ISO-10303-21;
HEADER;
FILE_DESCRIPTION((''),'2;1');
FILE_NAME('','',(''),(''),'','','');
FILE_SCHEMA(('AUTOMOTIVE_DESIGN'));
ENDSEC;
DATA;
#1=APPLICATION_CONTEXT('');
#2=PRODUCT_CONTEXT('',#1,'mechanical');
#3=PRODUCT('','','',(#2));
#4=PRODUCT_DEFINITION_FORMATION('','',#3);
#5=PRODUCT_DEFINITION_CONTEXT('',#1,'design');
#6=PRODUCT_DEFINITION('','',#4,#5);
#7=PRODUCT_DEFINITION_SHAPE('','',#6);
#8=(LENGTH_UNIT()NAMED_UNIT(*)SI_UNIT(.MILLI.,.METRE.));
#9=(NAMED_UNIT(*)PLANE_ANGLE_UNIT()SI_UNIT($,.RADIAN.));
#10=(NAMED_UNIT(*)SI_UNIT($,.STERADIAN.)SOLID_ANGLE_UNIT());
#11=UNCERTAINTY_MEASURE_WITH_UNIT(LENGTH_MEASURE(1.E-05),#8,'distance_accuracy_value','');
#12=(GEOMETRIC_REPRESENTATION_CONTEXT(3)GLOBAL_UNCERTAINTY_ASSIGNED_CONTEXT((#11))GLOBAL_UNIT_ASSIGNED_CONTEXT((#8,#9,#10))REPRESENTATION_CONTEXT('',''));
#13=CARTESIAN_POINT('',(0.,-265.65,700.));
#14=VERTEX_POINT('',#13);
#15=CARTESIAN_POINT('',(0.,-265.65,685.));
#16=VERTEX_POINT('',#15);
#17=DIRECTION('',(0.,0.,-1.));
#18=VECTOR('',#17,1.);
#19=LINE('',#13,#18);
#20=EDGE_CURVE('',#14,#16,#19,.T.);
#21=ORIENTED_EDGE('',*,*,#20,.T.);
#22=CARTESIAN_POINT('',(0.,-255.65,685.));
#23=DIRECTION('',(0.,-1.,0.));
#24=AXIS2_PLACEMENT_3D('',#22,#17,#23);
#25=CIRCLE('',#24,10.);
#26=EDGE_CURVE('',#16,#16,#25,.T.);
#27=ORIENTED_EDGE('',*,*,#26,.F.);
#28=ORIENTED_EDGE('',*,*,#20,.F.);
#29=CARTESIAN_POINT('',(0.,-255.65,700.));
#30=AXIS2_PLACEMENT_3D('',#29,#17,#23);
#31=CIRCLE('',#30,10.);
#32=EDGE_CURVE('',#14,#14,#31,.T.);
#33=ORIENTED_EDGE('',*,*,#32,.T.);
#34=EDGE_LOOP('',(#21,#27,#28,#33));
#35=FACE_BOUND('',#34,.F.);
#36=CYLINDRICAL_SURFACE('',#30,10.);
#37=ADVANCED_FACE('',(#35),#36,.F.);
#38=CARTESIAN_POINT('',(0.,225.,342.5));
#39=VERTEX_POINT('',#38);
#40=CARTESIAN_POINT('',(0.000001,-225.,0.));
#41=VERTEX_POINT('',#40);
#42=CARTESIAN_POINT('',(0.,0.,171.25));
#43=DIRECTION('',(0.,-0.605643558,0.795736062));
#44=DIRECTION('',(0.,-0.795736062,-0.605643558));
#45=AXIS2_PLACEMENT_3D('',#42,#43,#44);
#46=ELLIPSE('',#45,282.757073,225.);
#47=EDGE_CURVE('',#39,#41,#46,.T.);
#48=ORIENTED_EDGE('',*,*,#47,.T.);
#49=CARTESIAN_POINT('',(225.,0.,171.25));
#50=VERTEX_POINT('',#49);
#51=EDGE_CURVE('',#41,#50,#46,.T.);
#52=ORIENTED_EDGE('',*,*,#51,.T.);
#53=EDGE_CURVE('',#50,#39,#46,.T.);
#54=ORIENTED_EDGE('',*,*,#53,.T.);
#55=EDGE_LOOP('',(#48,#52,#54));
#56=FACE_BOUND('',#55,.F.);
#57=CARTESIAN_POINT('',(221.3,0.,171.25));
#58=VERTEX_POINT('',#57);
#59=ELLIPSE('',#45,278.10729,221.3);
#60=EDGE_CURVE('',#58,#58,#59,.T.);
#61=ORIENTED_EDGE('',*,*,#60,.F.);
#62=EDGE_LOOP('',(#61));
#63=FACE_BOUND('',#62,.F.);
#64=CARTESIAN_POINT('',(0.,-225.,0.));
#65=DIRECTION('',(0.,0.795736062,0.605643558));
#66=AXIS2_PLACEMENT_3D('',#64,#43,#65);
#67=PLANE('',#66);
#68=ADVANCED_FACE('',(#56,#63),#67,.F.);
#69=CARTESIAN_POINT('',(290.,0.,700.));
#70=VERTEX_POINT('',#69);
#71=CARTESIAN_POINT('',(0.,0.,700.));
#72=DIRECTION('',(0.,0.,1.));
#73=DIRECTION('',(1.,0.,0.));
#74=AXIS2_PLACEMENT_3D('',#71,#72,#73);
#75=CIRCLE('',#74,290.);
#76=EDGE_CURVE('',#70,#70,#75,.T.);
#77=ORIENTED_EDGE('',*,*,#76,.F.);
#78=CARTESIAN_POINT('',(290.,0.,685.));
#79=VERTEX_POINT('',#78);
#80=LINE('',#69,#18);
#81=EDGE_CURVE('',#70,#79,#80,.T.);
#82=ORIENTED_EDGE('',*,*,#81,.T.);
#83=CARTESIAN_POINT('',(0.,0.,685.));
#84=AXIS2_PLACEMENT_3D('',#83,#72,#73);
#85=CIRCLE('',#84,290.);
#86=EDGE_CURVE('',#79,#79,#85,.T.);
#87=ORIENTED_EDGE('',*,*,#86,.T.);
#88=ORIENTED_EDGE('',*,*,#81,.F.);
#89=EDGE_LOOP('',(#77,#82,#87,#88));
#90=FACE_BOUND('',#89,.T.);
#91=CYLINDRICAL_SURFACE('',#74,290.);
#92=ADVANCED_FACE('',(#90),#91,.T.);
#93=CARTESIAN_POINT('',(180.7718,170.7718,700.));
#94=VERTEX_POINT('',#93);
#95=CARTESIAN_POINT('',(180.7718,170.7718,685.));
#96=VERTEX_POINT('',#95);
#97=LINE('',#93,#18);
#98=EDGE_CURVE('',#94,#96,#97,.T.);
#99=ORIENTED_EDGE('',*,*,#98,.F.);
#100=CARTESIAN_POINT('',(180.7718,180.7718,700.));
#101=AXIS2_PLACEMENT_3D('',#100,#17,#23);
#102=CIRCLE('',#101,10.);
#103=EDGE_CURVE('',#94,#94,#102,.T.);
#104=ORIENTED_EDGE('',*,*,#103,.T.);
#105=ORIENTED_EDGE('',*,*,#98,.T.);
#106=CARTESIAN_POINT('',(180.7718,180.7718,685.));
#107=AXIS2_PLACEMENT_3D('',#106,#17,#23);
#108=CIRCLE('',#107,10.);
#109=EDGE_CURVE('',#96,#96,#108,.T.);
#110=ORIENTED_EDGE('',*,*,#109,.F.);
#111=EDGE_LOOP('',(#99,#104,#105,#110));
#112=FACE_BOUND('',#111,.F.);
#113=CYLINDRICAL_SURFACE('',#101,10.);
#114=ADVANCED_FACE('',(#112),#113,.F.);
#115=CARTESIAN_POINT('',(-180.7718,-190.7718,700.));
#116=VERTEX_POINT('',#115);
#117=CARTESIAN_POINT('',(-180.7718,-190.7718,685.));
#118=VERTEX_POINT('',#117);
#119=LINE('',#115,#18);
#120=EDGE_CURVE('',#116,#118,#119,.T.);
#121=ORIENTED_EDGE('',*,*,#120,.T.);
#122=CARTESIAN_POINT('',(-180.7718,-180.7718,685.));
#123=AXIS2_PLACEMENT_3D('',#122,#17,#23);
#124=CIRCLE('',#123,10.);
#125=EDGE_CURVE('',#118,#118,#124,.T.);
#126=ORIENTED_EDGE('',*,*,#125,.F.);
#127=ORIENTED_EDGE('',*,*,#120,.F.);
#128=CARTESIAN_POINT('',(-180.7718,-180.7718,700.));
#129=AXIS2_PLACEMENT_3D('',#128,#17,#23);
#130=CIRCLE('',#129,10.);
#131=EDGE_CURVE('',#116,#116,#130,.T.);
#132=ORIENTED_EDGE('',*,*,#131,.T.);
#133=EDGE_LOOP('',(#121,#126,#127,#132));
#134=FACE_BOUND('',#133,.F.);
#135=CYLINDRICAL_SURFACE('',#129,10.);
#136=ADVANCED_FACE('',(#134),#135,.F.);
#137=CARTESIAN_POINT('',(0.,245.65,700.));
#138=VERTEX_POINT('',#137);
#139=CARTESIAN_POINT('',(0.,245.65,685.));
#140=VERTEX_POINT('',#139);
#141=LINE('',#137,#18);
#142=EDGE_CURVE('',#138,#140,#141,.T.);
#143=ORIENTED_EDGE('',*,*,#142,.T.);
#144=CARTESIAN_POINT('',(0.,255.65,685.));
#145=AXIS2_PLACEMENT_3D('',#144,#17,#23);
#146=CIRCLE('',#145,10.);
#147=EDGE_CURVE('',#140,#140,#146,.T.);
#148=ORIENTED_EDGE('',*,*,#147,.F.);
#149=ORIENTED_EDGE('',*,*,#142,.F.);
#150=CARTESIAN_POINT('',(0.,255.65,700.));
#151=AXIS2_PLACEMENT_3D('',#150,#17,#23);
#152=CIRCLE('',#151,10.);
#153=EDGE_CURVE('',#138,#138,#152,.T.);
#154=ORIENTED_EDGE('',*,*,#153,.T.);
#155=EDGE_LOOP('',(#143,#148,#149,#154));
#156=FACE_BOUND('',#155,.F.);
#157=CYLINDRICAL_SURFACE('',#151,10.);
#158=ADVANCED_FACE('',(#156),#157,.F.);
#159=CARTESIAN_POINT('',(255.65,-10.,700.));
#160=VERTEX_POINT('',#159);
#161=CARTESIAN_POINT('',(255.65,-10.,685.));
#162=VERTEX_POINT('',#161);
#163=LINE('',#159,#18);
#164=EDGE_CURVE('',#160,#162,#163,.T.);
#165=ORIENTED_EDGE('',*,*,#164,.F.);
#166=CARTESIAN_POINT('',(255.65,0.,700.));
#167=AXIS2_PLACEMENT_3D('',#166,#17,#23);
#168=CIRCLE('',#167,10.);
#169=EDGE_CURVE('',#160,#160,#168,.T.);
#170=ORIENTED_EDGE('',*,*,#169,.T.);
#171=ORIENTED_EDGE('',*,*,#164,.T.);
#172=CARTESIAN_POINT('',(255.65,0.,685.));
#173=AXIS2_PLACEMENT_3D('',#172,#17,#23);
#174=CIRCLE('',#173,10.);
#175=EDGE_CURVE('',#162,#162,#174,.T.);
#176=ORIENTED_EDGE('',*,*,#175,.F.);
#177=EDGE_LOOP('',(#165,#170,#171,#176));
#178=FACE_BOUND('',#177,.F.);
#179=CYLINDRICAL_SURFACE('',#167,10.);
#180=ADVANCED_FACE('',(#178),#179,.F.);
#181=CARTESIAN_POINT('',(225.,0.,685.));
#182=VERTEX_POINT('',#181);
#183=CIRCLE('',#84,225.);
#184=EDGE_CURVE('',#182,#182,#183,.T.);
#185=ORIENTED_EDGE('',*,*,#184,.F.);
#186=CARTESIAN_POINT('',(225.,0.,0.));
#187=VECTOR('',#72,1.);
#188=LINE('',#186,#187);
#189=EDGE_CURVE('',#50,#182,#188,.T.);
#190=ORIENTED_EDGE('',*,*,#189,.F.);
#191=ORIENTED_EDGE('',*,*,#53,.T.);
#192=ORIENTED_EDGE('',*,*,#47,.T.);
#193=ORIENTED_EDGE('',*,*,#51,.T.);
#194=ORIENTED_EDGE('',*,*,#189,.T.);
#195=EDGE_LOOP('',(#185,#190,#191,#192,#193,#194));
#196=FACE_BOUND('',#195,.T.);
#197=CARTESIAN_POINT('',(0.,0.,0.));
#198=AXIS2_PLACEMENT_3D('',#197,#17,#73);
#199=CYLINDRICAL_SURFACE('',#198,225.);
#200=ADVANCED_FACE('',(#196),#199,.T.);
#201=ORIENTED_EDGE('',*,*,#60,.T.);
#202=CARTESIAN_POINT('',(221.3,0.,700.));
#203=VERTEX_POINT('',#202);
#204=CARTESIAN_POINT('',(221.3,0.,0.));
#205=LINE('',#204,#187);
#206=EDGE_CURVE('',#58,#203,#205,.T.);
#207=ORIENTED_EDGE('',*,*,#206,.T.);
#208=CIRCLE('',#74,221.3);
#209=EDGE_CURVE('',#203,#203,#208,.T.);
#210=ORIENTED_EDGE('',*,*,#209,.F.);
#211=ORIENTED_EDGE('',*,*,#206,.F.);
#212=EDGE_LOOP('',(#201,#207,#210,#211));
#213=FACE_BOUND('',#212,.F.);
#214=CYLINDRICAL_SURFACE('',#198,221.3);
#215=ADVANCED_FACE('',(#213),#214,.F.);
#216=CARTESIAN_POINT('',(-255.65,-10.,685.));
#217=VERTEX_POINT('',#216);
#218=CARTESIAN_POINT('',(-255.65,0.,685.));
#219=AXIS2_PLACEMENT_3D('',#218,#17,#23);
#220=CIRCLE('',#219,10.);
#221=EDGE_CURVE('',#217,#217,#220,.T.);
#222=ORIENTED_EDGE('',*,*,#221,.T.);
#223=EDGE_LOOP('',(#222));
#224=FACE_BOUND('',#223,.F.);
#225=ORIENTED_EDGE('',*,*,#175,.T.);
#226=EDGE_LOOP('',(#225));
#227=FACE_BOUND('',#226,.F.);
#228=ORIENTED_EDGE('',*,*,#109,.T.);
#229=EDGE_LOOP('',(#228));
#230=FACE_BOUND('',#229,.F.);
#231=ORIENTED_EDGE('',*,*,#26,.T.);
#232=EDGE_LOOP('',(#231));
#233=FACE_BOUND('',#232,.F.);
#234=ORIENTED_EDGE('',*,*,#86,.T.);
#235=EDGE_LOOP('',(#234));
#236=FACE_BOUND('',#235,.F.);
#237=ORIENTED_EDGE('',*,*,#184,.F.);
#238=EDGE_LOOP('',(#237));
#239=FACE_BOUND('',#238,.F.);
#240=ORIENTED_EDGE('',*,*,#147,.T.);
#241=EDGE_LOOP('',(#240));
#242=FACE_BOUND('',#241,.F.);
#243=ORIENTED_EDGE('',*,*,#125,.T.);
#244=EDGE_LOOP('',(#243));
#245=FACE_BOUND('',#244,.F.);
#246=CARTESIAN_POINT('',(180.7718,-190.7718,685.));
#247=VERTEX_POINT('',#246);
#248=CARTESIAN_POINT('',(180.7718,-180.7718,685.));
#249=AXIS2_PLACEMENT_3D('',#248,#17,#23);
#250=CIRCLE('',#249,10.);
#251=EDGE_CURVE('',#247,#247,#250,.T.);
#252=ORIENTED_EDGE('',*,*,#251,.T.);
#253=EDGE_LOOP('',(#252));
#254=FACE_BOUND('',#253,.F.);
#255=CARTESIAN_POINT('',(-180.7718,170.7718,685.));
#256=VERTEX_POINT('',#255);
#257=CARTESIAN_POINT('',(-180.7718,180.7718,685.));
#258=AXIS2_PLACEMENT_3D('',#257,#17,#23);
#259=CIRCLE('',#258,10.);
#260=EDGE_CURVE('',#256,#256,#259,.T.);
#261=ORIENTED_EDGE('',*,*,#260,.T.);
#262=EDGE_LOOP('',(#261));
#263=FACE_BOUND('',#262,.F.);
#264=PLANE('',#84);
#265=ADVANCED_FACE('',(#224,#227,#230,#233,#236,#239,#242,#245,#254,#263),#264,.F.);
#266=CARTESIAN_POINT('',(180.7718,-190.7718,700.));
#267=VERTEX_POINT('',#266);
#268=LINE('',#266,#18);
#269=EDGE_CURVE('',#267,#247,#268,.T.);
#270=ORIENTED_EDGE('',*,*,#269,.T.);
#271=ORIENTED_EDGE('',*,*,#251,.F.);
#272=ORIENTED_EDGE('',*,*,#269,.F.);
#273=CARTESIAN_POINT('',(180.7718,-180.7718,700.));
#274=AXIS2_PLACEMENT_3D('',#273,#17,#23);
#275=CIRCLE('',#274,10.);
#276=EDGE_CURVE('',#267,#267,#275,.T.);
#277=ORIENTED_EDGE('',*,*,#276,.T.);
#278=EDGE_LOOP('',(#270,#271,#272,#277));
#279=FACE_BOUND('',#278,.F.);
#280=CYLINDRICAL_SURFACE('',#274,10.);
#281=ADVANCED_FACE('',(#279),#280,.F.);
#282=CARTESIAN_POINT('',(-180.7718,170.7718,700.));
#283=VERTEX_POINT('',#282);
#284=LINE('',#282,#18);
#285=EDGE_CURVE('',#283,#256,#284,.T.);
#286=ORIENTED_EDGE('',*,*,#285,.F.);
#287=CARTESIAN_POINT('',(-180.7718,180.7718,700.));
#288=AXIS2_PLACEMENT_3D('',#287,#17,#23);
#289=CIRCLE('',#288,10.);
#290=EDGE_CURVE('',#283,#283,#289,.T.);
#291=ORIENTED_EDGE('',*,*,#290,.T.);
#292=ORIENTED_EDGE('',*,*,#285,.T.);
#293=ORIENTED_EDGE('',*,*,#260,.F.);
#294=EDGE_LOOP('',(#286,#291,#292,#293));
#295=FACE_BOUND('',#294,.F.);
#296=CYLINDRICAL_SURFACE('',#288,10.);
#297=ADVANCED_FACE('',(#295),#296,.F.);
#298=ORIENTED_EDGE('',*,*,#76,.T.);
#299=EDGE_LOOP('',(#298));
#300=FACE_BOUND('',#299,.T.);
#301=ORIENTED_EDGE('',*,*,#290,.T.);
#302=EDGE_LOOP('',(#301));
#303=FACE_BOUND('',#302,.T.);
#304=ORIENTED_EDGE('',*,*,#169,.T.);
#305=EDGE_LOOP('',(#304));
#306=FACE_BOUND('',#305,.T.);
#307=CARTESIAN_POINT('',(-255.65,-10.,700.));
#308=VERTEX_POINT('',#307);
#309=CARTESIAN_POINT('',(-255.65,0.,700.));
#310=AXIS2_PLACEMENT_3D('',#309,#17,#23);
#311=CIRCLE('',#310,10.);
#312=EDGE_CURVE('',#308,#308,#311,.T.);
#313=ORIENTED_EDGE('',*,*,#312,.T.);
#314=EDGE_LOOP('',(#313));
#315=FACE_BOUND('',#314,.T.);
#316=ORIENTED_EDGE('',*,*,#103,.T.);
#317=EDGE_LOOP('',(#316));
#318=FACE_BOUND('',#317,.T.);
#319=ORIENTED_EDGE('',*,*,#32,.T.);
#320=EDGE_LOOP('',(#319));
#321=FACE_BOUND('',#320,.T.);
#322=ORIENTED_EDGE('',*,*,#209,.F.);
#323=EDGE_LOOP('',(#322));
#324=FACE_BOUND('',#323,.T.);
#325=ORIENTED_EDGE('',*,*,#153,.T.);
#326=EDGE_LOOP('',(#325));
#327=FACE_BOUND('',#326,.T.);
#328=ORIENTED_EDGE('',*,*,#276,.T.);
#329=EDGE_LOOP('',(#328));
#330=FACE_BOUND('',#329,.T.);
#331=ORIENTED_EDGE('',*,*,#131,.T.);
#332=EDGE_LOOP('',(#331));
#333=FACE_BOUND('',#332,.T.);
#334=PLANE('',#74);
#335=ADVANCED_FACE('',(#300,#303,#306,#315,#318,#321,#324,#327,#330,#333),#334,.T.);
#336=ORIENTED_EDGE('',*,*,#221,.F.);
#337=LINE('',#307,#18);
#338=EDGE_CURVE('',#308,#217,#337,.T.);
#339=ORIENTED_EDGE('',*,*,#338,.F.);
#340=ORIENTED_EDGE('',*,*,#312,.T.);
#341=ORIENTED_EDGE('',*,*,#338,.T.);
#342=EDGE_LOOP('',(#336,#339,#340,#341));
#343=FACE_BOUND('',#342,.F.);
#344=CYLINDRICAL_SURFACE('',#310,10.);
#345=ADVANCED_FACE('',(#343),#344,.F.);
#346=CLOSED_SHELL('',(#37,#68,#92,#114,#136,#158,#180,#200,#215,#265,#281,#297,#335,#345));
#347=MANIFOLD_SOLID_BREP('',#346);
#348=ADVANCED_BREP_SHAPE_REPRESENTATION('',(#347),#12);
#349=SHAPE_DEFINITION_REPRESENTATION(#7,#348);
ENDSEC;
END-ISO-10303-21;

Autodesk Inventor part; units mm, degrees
ref_plane "YZ Plane" through (0, 0, 0) normal (1, 0, 0) x (0, 1, 0)
ref_plane "XZ Plane" through (0, 0, 0) normal (0, 1, 0) x (-1, 0, 0)
ref_plane "XY Plane" through (0, 0, 0) normal (0, 0, 1) x (1, 0, 0)
sketch "草图1" plane through (0, 0, 0) normal (0, 0, 1) x (1, 0, 0)
  circle A0 centre (0, 0) radius 225
  dimension "d0" = 450
surface extrude "拉伸曲面1" sketch "草图1" along normal blind 700 shown no curves A0
thicken "加厚1" operation new thickness 3.7 both sides no extend neighbours no toward (-0.9057566, 0.4237984, 0) faces at (203.7952, -95.3546, 466.6667)
sketch "草图2" plane through (0, 0, 700) normal (0, 0, 1) x (1, 0, 0)
  circle A0 centre (0, 0) radius 225 projected
  circle A1 centre (0, 0) radius 221.3 projected
  circle A2 centre (0, 0) radius 290
  dimension "d18" = 580
  dimension "d19" = 442.6
  dimension "d20" = 450
extrude "拉伸1" add sketch "草图2" against normal blind 15 contours A2
sketch "草图3" plane through (0, 0, 700) normal (0, 0, 1) x (1, 0, 0)
  circle A0 centre (0, 0) radius 290 projected
  circle A1 centre (0, 0) radius 221.3 projected
  line L0 (0, -221.3) -> (0, -290)
  point P0 (0, -255.65)
  point P1 (180.7718, -180.7718)
  point P2 (255.65, 0)
  point P3 (180.7718, 180.7718)
  point P4 (0, 255.65)
  point P5 (-180.7718, 180.7718)
  point P6 (-255.65, 0)
  point P7 (-180.7718, -180.7718)
  dimension "d9" = 360
  dimension "d21" = 255.65
hole "孔1" at (0, -255.65, 700) at (180.7718, -180.7718, 700) at (255.65, 0, 700) at (180.7718, 180.7718, 700) at (0, 255.65, 700) at (-180.7718, 180.7718, 700) at (-255.65, 0, 700) at (-180.7718, -180.7718, 700) direction (0, 0, -1) diameter 20 end through all
sketch "草图4" plane through (0, 0, 0) normal (1, 0, 0) x (0, 1, 0)
  line L0 (-225, 685) -> (225, 685) projected
  line L1 (225, 0) -> (-225, 0) projected
  line L2 (225, 0) -> (-225, 0) projected
  line L3 (-225, 0) -> (225, 342.5)
  line L4 (225, 0) -> (225, 685) projected
  point P0 (0, 0)
extrude "拉伸2" cut sketch "草图4" along normal mid plane 1000
properties part number "进气孔"
